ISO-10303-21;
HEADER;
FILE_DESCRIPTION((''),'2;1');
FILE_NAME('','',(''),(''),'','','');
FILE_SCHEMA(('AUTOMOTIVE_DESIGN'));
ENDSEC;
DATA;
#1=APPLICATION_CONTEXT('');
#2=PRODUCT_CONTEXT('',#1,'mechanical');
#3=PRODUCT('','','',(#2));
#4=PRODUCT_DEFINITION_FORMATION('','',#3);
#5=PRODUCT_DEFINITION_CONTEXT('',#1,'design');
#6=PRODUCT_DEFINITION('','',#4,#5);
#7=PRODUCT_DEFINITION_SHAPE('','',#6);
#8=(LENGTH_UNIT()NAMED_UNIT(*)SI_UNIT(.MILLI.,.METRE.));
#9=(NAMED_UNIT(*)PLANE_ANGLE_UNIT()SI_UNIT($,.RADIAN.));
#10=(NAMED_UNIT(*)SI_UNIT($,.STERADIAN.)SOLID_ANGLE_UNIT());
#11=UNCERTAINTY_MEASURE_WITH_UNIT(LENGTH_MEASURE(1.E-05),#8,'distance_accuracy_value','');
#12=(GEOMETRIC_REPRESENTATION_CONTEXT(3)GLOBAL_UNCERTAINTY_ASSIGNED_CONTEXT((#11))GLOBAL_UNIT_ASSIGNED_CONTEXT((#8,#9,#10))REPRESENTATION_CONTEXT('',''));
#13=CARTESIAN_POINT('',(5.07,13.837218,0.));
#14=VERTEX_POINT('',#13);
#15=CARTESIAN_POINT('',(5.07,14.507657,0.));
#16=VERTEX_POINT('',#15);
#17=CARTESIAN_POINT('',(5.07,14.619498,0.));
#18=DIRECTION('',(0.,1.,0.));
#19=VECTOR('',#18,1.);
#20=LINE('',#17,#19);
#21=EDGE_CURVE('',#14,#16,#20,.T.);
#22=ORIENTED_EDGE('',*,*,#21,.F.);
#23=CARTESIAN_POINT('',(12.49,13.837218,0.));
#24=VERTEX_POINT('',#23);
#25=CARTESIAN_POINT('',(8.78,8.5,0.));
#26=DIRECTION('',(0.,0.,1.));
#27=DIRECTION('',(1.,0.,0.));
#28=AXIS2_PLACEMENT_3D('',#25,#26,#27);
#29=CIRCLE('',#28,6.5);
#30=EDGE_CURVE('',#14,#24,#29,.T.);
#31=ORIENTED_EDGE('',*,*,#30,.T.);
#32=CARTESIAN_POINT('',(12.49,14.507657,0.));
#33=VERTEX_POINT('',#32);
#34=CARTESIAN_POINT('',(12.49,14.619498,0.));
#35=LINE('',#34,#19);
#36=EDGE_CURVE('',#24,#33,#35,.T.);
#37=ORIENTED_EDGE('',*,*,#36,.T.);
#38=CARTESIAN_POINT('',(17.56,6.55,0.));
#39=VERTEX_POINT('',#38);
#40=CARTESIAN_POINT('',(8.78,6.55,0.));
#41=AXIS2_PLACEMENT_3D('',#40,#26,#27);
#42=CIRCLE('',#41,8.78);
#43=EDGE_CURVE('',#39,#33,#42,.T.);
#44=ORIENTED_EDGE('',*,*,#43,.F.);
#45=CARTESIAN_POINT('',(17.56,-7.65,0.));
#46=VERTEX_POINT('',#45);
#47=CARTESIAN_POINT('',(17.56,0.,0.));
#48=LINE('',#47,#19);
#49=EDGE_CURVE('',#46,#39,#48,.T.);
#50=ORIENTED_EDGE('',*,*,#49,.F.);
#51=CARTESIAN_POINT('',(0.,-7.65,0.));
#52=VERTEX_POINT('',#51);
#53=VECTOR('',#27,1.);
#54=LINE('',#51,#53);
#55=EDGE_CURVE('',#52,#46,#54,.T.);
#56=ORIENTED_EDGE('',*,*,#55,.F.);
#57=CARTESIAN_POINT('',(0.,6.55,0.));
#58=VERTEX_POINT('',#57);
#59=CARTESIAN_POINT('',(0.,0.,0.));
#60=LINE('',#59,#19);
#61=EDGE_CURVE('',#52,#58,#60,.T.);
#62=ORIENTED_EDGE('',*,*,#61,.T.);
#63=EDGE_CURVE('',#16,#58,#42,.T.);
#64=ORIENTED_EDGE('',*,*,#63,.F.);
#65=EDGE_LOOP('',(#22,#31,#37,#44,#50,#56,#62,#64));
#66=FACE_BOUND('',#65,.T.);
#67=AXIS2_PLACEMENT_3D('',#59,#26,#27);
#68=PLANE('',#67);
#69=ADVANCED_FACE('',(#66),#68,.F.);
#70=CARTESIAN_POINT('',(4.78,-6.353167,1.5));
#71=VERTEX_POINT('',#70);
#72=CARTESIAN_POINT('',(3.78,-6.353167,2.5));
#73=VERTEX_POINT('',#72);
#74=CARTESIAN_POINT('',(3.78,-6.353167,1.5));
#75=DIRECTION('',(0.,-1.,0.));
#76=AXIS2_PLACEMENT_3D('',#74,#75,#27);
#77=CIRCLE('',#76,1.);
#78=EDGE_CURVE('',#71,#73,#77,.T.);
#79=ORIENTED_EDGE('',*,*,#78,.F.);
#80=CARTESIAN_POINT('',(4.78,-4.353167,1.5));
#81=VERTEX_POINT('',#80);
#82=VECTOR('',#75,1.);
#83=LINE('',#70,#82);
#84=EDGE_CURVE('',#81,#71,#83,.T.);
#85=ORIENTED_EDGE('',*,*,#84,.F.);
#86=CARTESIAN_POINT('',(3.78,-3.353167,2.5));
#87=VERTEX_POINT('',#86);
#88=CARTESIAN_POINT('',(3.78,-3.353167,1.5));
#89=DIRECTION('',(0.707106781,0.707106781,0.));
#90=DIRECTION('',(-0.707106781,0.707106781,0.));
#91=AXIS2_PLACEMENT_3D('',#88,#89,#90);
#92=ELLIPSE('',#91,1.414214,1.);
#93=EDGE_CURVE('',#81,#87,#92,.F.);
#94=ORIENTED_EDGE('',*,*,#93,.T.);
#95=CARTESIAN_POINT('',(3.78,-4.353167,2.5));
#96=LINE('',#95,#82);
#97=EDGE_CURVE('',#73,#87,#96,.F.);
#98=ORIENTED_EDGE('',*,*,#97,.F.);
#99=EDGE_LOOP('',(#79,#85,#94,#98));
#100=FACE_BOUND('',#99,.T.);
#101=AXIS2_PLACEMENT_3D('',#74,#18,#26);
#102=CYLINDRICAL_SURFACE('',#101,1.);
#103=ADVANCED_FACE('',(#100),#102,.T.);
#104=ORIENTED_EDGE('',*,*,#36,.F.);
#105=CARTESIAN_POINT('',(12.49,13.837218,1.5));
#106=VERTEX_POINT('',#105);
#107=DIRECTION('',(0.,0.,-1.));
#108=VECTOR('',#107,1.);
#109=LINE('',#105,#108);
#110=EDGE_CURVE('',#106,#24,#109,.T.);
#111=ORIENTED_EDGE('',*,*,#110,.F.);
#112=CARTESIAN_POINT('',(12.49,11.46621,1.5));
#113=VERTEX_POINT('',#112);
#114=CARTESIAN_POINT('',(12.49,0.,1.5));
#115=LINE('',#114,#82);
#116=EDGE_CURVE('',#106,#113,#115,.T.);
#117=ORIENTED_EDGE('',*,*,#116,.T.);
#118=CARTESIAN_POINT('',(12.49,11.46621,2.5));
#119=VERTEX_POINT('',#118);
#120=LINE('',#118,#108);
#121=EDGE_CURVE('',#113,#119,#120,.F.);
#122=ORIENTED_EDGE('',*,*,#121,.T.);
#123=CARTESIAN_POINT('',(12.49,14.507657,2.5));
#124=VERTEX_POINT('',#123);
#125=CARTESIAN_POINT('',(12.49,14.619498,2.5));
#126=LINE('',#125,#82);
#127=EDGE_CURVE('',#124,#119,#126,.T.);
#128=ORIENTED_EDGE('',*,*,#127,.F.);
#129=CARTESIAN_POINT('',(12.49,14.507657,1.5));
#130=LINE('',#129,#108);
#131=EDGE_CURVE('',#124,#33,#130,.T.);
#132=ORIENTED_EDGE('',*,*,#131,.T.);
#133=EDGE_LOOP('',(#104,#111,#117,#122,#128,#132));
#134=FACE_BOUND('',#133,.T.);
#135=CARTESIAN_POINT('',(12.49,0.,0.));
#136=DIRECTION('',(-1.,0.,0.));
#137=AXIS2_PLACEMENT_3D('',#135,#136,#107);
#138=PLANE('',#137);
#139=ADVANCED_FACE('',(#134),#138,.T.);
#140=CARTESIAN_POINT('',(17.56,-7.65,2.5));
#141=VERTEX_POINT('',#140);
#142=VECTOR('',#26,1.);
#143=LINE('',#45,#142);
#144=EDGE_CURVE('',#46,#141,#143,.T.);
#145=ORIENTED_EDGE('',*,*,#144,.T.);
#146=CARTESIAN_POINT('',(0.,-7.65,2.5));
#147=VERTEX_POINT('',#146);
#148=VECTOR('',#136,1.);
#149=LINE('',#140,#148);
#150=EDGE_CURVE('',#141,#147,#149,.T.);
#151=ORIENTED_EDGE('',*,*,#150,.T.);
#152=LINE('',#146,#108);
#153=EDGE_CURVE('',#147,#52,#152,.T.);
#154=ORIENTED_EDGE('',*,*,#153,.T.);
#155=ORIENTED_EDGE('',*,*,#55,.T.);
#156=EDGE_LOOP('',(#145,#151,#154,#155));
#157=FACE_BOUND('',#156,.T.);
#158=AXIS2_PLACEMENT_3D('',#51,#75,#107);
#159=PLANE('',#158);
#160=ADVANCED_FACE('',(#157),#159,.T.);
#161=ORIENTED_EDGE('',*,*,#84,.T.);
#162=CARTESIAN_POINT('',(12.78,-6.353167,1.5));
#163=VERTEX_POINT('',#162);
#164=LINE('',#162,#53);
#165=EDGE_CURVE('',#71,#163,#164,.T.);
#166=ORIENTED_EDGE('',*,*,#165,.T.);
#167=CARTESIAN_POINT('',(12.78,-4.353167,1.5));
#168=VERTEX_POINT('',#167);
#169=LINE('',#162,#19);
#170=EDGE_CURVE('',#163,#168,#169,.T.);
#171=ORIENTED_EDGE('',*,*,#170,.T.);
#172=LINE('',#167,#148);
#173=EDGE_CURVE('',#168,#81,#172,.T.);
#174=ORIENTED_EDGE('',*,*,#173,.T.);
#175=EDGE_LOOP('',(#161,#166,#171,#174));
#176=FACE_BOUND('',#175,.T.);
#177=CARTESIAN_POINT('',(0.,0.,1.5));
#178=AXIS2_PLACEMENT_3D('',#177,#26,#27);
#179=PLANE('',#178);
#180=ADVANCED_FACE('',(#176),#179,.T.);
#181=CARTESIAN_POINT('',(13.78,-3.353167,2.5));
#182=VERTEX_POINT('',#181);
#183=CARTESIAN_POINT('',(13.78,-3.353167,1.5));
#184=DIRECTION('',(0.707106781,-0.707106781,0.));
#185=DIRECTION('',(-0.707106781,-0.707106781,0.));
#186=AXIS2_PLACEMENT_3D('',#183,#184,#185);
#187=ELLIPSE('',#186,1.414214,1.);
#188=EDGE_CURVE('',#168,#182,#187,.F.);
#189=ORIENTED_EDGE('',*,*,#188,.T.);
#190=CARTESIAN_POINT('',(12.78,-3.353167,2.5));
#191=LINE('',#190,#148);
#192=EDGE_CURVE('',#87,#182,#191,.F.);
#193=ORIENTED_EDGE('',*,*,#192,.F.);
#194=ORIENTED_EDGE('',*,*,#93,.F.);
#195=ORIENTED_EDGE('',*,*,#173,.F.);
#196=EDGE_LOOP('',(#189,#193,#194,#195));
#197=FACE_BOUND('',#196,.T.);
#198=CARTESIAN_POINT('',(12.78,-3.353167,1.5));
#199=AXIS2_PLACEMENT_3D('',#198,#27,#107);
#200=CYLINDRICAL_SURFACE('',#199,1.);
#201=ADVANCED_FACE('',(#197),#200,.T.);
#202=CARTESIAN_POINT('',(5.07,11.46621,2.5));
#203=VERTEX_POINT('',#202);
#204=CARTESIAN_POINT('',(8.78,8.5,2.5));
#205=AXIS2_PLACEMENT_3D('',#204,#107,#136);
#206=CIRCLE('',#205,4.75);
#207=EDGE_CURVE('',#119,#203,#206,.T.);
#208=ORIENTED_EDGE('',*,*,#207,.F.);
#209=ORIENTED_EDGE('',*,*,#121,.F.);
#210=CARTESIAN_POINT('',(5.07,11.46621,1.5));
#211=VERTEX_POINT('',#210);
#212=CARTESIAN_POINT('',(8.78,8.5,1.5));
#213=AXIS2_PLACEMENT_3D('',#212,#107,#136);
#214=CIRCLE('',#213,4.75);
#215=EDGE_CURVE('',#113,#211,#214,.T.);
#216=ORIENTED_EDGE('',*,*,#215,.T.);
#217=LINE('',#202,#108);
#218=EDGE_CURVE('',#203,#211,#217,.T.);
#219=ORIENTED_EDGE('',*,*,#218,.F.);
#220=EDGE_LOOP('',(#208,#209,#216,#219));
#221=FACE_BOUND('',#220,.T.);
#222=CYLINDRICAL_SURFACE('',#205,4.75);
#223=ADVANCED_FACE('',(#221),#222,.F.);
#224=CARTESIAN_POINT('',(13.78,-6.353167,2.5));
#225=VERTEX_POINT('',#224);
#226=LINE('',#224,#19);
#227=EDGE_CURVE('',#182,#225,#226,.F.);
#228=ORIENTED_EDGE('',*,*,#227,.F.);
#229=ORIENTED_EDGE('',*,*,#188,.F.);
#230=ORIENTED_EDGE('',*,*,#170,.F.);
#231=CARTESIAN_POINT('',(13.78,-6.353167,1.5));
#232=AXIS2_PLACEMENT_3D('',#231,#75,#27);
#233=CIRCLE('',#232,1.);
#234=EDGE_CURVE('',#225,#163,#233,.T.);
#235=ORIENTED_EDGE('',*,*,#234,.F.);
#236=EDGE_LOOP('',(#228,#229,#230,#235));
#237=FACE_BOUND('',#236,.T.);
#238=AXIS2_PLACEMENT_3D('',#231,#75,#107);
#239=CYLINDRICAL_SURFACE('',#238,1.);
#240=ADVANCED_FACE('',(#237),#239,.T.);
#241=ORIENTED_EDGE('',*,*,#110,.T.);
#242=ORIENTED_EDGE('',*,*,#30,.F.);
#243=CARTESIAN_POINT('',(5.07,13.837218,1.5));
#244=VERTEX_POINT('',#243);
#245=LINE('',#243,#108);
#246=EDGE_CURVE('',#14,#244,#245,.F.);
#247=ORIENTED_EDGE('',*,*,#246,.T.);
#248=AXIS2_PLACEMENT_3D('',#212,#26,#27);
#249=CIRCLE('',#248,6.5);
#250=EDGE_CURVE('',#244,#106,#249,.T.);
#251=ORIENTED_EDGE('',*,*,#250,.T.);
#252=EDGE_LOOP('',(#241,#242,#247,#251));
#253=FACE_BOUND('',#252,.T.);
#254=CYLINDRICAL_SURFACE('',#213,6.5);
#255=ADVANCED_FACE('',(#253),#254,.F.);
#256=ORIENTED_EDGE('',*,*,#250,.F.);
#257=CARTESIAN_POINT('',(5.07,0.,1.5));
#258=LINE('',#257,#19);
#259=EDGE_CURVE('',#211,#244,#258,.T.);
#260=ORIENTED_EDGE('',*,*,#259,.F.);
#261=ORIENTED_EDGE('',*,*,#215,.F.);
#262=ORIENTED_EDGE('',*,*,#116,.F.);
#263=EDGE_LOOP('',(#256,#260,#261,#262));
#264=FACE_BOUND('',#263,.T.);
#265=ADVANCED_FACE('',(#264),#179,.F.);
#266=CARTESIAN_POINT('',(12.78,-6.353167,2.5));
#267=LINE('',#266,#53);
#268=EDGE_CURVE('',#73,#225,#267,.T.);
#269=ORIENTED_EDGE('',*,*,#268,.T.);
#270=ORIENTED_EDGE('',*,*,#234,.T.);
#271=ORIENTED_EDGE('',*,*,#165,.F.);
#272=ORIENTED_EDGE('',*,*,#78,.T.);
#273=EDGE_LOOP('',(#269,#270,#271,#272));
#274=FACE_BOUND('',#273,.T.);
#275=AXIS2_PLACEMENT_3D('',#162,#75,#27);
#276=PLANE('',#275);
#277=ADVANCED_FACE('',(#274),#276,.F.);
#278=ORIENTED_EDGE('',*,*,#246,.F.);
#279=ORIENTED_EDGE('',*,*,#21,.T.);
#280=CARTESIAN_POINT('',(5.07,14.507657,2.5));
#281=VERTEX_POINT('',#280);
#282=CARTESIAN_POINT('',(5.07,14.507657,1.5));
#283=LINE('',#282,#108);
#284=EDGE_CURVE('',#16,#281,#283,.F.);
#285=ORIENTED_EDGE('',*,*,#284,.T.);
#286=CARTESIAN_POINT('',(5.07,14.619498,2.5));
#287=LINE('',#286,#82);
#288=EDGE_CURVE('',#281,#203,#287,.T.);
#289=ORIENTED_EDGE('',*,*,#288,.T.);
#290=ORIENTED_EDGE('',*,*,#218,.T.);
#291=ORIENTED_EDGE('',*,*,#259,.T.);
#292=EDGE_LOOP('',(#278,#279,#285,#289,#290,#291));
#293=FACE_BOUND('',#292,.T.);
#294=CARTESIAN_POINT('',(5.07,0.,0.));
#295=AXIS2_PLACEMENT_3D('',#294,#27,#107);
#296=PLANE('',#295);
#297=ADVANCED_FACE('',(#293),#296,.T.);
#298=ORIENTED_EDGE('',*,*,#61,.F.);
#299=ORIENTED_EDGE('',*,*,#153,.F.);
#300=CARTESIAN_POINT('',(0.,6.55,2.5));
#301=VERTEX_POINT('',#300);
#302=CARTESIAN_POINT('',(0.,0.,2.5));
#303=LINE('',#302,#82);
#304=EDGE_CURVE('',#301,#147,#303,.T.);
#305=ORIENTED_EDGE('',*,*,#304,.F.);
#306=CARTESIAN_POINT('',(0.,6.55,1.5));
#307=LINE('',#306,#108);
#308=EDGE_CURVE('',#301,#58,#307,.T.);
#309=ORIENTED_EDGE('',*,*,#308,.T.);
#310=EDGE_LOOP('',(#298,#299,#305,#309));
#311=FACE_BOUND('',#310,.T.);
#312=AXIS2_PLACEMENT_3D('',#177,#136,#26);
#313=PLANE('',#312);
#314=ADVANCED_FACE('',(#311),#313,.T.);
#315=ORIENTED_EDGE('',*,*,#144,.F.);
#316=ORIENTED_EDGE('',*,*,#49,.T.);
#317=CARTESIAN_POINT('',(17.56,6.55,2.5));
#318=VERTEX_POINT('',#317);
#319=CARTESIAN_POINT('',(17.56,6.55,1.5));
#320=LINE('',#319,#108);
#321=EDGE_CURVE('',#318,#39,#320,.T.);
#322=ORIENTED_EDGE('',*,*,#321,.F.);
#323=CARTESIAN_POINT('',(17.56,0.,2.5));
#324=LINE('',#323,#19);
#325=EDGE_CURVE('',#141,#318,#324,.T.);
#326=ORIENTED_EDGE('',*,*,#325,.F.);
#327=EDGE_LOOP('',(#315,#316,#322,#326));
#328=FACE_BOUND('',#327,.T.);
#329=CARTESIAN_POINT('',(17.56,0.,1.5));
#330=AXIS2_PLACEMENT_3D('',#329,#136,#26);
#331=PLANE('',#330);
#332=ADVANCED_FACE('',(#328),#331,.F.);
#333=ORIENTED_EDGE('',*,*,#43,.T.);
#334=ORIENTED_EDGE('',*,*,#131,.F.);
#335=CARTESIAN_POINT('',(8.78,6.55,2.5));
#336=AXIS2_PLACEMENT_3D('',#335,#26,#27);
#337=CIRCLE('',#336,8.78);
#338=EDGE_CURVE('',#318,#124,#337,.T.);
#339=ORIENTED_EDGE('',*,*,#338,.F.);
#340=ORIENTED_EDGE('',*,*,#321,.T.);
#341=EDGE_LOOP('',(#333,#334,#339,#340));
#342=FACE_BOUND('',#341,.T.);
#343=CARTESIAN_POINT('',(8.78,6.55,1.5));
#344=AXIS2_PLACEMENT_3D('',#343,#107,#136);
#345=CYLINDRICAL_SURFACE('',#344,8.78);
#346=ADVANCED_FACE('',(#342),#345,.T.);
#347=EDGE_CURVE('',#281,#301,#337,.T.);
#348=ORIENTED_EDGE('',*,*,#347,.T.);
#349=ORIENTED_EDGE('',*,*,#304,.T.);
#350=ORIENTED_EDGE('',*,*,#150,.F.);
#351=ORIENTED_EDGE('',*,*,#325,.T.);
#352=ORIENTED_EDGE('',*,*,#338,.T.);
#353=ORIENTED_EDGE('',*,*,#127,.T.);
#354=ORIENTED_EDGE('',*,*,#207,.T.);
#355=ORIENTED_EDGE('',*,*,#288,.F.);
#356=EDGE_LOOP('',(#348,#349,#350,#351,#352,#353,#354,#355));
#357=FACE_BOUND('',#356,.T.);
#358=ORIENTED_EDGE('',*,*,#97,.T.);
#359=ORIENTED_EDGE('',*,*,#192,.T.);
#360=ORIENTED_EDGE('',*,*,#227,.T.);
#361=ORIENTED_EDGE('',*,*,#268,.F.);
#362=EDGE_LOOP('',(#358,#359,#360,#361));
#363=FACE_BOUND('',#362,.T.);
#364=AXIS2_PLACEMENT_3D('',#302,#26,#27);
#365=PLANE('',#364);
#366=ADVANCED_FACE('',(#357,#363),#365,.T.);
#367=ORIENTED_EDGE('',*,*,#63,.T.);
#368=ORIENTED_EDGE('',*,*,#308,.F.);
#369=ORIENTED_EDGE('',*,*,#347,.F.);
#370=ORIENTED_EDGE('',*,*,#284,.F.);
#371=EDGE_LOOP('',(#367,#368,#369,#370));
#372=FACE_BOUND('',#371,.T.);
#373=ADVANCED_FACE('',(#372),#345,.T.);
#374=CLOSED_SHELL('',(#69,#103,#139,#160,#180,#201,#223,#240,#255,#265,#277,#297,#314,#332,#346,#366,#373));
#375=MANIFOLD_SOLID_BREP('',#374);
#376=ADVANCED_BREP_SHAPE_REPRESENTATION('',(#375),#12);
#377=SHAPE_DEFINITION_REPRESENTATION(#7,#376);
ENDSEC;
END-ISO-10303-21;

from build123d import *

# Parameters (mm, degrees)
BOSS_EXTRUDE1_DEPTH = 1.5
BOSS_EXTRUDE2_DEPTH = 1
SKETCH4_R           = 4.75
CUT_EXTRUDE1_DEPTH  = 23.898325822
SKETCH5_W           = 17.56
SKETCH5_H           = 2.5
BOSS_EXTRUDE3_DEPTH = 0.15
SKETCH6_W           = 17.56
SKETCH6_H           = 2.5
BOSS_EXTRUDE4_DEPTH = 7.5
SKETCH9_W           = 8
SKETCH9_H           = 2
CUT_EXTRUDE2_DEPTH  = 1
FILLET1_R           = 1
CUT_EXTRUDE3_REACH  = 30.47
SKETCH10_W          = 6.92
SKETCH10_H          = 1
SKETCH11_W          = 2.5
SKETCH11_H          = 3.588872583
CUT_EXTRUDE4_DEPTH  = 0.25


with BuildPart() as part:
    # Sketch1 → Boss-Extrude1 (new body)
    with BuildSketch(Plane.XY):
        with BuildLine():
            ThreePointArc((14.980604809, 6.55), (8.78, 2), (2.579395191, 6.55))
            Line((2.579395191, 6.55), (0, 6.55))
            Line((0, 6.55), (0, 0))
            Line((0, 0), (17.56, 0))
            Line((17.56, 0), (17.56, 6.55))
            Line((17.56, 6.55), (14.980604809, 6.55))
        make_face()
        with BuildLine():
            ThreePointArc((2.579395191, 6.55), (2.679421093, 10.743420825), (5.32, 14.002581212))
            Line((5.32, 14.002581212), (5.32, 14.619498126))
            ThreePointArc((5.32, 14.619498126), (1.449679407, 11.382680416), (0, 6.55))
            Line((0, 6.55), (2.579395191, 6.55))
        make_face()
        with BuildLine():
            ThreePointArc((12.24, 14.002581212), (14.880578907, 10.743420825), (14.980604809, 6.55))
            Line((14.980604809, 6.55), (17.56, 6.55))
            ThreePointArc((17.56, 6.55), (16.110320593, 11.382680416), (12.24, 14.619498126))
            Line((12.24, 14.619498126), (12.24, 14.002581212))
        make_face()
    extrude(amount=BOSS_EXTRUDE1_DEPTH)

    # Sketch3 → Boss-Extrude2 (add)
    with BuildSketch(Plane.XY.offset(1.5)):
        with BuildLine():
            Line((12.24, 14.619498126), (12.24, 14.002581212))
            ThreePointArc((12.24, 14.002581212), (8.78, 2), (5.32, 14.002581212))
            Line((5.32, 14.002581212), (5.32, 14.619498126))
            ThreePointArc((5.32, 14.619498126), (1.449679407, 11.382680416), (0, 6.55))
            Line((0, 6.55), (0, 0))
            Line((0, 0), (17.56, 0))
            Line((17.56, 0), (17.56, 6.55))
            ThreePointArc((17.56, 6.55), (16.110320593, 11.382680416), (12.24, 14.619498126))
        make_face()
        with BuildLine():
            Line((5.32, 14.619498126), (12.24, 14.619498126))
            Line((12.24, 14.619498126), (12.24, 14.002581212))
            ThreePointArc((12.24, 14.002581212), (8.78, 2), (5.32, 14.002581212))
            Line((5.32, 14.002581212), (5.32, 14.619498126))
        make_face()
    extrude(amount=BOSS_EXTRUDE2_DEPTH)

    # Sketch4 → Cut-Extrude1 (cut, through all)
    with BuildSketch(Plane(origin=(0, 0, 1.5), x_dir=(-1, 0, 0), z_dir=(0, 0, -1))):
        with Locations((-8.78, 8.5)):
            Circle(SKETCH4_R)
    extrude(amount=-CUT_EXTRUDE1_DEPTH, mode=Mode.SUBTRACT)

    # Sketch5 → Boss-Extrude3 (add)
    with BuildSketch(Plane.XZ):
        with Locations((8.78, 1.25)):
            Rectangle(SKETCH5_W, SKETCH5_H)
    extrude(amount=BOSS_EXTRUDE3_DEPTH)

    # Sketch6 → Boss-Extrude4 (add)
    with BuildSketch(Plane.XZ.offset(0.15)):
        with Locations((8.78, 1.25)):
            Rectangle(SKETCH6_W, SKETCH6_H)
    extrude(amount=BOSS_EXTRUDE4_DEPTH)

    # Sketch9 → Cut-Extrude2 (cut)
    with BuildSketch(Plane.XY.offset(2.5)):
        with Locations((8.78, -5.353166831)):
            Rectangle(SKETCH9_W, SKETCH9_H)
    extrude(amount=-CUT_EXTRUDE2_DEPTH, mode=Mode.SUBTRACT)

    # Fillet1
    fillet1_edges = [part.edges().sort_by_distance(p)[0] for p in [
        (4.78, -5.353166831, 2.5),
        (12.78, -5.353166831, 2.5),
        (8.78, -4.353166831, 2.5),
    ]]
    fillet(fillet1_edges, radius=FILLET1_R - 0.0001)  # a hair under: the kernel refuses the full size

    # Sketch10 → Cut-Extrude3 (cut, up to next)
    with BuildSketch(Plane(origin=(0, 14.619498126, 0), x_dir=(1, 0, 0), z_dir=(0, 1, 0)), mode=Mode.PRIVATE) as cut_extrude3_sk1:
        with Locations((8.78, -2)):
            Rectangle(SKETCH10_W, SKETCH10_H)
    cut_extrude3_tool1 = extrude(cut_extrude3_sk1.sketch, amount=-CUT_EXTRUDE3_REACH, mode=Mode.PRIVATE) & part.part
    add(cut_extrude3_tool1.solids().sort_by_distance((8.78, 14.619498, 2))[0], mode=Mode.SUBTRACT)

    # Sketch11 → Cut-Extrude4 (cut)
    with BuildSketch(Plane(origin=(5.32, 0, 0), x_dir=(0, 0, -1), z_dir=(1, 0, 0))):
        with Locations((-1.25, 12.825061835)):
            Rectangle(SKETCH11_W, SKETCH11_H)
    cut_extrude4 = extrude(amount=-CUT_EXTRUDE4_DEPTH, mode=Mode.SUBTRACT)

    # Mirror1: Cut-Extrude4 across plane
    add(cut_extrude4.mirror(Plane.ZY.offset(-8.78)), mode=Mode.SUBTRACT)


solid = part.part
